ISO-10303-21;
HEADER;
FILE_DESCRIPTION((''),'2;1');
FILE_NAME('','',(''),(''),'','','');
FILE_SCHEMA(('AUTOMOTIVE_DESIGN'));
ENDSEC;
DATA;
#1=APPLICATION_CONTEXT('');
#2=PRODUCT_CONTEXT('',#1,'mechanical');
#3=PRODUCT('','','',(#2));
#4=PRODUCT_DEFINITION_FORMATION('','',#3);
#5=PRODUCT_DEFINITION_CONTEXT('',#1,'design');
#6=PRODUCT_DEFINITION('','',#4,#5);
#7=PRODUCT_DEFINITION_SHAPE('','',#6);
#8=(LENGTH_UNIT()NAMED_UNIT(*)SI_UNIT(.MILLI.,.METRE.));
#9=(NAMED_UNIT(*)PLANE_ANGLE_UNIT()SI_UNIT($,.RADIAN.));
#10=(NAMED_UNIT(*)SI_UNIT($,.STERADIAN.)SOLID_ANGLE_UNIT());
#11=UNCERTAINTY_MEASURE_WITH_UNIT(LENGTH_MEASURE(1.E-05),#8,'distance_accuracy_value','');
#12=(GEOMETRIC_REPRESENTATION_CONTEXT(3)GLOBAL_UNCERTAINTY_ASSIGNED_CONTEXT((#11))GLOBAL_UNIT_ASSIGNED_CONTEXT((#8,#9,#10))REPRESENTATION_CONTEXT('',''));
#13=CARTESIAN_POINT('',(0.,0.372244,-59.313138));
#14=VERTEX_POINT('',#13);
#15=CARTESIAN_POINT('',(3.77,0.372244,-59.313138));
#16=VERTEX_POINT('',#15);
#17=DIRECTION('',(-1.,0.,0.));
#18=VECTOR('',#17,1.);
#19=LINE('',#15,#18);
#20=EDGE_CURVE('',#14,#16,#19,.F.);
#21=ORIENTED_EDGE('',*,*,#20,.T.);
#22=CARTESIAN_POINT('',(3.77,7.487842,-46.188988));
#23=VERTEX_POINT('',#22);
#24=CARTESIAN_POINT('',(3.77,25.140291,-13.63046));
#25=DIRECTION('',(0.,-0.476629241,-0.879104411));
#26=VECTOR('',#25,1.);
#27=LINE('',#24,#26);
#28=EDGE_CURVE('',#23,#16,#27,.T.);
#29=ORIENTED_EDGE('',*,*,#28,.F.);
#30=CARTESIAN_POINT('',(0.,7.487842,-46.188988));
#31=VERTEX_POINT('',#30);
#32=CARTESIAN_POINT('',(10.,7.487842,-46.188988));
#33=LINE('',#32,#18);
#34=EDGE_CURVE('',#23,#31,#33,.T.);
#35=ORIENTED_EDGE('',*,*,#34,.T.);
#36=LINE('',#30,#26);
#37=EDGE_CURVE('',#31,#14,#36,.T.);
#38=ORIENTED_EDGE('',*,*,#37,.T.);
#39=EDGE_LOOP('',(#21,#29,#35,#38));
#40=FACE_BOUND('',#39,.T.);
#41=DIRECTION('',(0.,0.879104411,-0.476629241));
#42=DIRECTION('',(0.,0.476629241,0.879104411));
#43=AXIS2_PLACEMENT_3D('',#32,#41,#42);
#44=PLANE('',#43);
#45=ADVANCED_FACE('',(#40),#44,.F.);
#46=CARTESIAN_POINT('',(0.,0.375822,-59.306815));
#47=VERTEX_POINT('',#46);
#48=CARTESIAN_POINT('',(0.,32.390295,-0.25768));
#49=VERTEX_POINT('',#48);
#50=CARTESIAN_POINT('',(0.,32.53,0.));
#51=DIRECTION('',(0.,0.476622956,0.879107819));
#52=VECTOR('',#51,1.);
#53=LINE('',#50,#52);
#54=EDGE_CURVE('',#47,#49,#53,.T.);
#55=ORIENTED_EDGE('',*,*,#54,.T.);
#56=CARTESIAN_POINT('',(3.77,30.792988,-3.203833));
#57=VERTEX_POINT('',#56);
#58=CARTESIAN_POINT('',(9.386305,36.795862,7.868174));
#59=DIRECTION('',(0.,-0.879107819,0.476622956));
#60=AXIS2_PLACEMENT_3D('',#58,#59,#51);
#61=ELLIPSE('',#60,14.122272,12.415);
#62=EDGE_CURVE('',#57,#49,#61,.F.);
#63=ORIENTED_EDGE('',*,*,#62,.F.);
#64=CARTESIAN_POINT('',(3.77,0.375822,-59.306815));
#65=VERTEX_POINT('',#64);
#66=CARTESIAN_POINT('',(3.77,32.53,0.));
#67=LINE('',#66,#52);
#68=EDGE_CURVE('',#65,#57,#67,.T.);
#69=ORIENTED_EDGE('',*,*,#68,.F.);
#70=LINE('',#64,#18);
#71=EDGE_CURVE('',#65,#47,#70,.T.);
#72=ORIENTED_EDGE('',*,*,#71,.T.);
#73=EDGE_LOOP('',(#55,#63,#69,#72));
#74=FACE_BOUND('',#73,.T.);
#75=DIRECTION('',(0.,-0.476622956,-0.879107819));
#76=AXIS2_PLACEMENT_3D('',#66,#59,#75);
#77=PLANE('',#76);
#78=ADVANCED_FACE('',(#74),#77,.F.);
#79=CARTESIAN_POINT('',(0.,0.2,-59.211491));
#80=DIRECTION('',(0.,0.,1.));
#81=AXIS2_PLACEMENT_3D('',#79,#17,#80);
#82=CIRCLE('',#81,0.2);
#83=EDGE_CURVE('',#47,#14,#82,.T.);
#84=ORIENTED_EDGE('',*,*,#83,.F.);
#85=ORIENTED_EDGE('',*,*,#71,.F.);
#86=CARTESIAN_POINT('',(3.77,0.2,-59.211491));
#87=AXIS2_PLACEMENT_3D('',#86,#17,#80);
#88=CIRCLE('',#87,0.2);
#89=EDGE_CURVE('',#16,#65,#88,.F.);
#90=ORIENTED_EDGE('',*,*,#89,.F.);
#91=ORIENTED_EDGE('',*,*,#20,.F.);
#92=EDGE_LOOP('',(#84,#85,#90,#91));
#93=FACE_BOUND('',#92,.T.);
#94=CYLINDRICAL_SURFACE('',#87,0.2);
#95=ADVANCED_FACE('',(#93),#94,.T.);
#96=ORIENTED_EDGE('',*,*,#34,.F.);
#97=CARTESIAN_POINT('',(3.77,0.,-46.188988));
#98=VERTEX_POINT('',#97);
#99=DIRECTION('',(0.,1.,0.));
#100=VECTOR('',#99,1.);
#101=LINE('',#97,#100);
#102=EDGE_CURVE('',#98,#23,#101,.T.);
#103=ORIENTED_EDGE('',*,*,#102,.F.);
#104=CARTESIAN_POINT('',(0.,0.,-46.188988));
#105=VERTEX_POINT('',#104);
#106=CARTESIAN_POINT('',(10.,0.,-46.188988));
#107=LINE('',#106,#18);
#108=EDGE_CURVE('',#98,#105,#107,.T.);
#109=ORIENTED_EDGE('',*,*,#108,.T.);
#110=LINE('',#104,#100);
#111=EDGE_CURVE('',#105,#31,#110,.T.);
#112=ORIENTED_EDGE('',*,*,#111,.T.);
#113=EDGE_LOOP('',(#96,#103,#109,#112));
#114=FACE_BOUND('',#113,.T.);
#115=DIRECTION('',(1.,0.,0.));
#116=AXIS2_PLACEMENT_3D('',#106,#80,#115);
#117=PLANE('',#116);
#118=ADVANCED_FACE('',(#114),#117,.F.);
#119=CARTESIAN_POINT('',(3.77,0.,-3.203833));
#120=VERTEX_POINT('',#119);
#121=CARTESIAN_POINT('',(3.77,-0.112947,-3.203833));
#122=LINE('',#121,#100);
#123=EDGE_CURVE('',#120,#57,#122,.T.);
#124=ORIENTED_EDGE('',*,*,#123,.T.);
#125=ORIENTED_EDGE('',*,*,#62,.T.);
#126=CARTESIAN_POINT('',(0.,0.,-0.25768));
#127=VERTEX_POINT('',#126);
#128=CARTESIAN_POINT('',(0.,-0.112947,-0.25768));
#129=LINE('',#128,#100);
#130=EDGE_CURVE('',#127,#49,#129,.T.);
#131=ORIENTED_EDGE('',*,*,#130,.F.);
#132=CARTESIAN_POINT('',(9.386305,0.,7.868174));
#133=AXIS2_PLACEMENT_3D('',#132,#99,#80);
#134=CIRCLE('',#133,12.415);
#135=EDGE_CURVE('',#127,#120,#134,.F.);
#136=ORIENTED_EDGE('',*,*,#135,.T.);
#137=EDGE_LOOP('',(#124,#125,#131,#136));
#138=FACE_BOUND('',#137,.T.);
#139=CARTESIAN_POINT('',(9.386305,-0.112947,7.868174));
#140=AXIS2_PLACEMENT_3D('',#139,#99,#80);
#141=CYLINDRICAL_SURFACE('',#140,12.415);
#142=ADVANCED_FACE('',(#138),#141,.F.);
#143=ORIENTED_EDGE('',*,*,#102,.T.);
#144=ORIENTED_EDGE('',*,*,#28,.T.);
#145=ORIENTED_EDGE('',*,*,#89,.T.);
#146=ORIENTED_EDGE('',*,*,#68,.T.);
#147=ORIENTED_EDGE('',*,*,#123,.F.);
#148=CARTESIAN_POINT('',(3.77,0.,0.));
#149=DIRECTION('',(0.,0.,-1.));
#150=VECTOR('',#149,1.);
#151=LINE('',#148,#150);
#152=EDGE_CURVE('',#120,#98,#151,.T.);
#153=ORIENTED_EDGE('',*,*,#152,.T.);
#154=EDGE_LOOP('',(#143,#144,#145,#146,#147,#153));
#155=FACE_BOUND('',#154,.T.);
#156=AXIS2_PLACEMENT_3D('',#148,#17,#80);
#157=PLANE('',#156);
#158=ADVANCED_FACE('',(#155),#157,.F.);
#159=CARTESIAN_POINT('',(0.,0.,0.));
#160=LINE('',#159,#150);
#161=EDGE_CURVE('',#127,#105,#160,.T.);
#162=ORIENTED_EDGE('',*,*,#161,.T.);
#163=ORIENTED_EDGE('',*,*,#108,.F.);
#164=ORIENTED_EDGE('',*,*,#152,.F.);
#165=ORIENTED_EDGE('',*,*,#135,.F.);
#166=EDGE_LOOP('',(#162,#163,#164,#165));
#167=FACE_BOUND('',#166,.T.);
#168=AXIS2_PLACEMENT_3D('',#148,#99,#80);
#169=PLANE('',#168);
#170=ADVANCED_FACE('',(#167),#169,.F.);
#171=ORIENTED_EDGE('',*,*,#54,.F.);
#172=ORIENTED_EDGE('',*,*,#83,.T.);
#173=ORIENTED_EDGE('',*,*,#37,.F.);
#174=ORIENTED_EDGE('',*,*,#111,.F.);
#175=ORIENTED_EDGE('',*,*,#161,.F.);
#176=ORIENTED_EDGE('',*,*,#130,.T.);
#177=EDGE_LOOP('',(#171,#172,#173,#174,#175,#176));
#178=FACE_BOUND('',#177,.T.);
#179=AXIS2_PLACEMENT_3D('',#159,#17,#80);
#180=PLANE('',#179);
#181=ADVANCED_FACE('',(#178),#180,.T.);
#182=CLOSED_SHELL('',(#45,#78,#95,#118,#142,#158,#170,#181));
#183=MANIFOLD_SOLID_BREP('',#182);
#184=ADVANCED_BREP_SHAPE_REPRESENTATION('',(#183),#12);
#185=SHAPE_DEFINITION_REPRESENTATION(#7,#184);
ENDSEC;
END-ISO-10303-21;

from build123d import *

# Parameters (mm, degrees)
BOSS_EXTRUDE1_DEPTH = 3.77
FILLET1_R           = 0.2
CAVITY1_DEPTH       = 32.53
CUT_EXTRUDE1_DEPTH  = 10


# Read off the part's stored shape, not the designer's step: Cavity1
with BuildPart() as part:
    # Sketch1 → Boss-Extrude1 (new body)
    with BuildSketch(Plane(origin=(0, 0, 0), x_dir=(0, 0, -1), z_dir=(1, 0, 0))):
        Polygon((0, 0), (60, 0), (0, 32.53), align=None)
    extrude(amount=BOSS_EXTRUDE1_DEPTH)

    # Fillet1
    fillet1_edges = [part.edges().sort_by_distance(p)[0] for p in [
        (1.885, 0, -60),
    ]]
    fillet(fillet1_edges, radius=FILLET1_R)

    # Cavity1 outline → Cavity1 (cut)
    with BuildSketch(Plane(origin=(0, 0, 0), x_dir=(1, 0, 0), z_dir=(0, 1, 0))):
        with BuildLine():
            Line((3.77, 0), (3.77, 3.2038331))
            ThreePointArc((3.77, 3.2038331), (1.741729711, 1.914090145), (0, 0.257679909))
            Line((0, 0.257679909), (0, 0))
            Line((0, 0), (3.77, 0))
        make_face()
    extrude(amount=CAVITY1_DEPTH, mode=Mode.SUBTRACT)

    # Sketch2 → Cut-Extrude1 (cut)
    with BuildSketch(Plane.ZY):
        Polygon((-46.188988267, 0), (-46.188988267, 7.48784154), (-59.313137704, 0.37224377), (-59.211490846, 0), align=None)
    extrude(amount=-CUT_EXTRUDE1_DEPTH, mode=Mode.SUBTRACT)


with BuildPart() as cut_extrude1_kept_piece:
    # of the separate pieces the step leaves, the one the design keeps (cut_extrude1_pieces_kept)
    add(part.part.solids().sort_by_distance((0, 0, -0.257679909))[0])


solid = cut_extrude1_kept_piece.part
